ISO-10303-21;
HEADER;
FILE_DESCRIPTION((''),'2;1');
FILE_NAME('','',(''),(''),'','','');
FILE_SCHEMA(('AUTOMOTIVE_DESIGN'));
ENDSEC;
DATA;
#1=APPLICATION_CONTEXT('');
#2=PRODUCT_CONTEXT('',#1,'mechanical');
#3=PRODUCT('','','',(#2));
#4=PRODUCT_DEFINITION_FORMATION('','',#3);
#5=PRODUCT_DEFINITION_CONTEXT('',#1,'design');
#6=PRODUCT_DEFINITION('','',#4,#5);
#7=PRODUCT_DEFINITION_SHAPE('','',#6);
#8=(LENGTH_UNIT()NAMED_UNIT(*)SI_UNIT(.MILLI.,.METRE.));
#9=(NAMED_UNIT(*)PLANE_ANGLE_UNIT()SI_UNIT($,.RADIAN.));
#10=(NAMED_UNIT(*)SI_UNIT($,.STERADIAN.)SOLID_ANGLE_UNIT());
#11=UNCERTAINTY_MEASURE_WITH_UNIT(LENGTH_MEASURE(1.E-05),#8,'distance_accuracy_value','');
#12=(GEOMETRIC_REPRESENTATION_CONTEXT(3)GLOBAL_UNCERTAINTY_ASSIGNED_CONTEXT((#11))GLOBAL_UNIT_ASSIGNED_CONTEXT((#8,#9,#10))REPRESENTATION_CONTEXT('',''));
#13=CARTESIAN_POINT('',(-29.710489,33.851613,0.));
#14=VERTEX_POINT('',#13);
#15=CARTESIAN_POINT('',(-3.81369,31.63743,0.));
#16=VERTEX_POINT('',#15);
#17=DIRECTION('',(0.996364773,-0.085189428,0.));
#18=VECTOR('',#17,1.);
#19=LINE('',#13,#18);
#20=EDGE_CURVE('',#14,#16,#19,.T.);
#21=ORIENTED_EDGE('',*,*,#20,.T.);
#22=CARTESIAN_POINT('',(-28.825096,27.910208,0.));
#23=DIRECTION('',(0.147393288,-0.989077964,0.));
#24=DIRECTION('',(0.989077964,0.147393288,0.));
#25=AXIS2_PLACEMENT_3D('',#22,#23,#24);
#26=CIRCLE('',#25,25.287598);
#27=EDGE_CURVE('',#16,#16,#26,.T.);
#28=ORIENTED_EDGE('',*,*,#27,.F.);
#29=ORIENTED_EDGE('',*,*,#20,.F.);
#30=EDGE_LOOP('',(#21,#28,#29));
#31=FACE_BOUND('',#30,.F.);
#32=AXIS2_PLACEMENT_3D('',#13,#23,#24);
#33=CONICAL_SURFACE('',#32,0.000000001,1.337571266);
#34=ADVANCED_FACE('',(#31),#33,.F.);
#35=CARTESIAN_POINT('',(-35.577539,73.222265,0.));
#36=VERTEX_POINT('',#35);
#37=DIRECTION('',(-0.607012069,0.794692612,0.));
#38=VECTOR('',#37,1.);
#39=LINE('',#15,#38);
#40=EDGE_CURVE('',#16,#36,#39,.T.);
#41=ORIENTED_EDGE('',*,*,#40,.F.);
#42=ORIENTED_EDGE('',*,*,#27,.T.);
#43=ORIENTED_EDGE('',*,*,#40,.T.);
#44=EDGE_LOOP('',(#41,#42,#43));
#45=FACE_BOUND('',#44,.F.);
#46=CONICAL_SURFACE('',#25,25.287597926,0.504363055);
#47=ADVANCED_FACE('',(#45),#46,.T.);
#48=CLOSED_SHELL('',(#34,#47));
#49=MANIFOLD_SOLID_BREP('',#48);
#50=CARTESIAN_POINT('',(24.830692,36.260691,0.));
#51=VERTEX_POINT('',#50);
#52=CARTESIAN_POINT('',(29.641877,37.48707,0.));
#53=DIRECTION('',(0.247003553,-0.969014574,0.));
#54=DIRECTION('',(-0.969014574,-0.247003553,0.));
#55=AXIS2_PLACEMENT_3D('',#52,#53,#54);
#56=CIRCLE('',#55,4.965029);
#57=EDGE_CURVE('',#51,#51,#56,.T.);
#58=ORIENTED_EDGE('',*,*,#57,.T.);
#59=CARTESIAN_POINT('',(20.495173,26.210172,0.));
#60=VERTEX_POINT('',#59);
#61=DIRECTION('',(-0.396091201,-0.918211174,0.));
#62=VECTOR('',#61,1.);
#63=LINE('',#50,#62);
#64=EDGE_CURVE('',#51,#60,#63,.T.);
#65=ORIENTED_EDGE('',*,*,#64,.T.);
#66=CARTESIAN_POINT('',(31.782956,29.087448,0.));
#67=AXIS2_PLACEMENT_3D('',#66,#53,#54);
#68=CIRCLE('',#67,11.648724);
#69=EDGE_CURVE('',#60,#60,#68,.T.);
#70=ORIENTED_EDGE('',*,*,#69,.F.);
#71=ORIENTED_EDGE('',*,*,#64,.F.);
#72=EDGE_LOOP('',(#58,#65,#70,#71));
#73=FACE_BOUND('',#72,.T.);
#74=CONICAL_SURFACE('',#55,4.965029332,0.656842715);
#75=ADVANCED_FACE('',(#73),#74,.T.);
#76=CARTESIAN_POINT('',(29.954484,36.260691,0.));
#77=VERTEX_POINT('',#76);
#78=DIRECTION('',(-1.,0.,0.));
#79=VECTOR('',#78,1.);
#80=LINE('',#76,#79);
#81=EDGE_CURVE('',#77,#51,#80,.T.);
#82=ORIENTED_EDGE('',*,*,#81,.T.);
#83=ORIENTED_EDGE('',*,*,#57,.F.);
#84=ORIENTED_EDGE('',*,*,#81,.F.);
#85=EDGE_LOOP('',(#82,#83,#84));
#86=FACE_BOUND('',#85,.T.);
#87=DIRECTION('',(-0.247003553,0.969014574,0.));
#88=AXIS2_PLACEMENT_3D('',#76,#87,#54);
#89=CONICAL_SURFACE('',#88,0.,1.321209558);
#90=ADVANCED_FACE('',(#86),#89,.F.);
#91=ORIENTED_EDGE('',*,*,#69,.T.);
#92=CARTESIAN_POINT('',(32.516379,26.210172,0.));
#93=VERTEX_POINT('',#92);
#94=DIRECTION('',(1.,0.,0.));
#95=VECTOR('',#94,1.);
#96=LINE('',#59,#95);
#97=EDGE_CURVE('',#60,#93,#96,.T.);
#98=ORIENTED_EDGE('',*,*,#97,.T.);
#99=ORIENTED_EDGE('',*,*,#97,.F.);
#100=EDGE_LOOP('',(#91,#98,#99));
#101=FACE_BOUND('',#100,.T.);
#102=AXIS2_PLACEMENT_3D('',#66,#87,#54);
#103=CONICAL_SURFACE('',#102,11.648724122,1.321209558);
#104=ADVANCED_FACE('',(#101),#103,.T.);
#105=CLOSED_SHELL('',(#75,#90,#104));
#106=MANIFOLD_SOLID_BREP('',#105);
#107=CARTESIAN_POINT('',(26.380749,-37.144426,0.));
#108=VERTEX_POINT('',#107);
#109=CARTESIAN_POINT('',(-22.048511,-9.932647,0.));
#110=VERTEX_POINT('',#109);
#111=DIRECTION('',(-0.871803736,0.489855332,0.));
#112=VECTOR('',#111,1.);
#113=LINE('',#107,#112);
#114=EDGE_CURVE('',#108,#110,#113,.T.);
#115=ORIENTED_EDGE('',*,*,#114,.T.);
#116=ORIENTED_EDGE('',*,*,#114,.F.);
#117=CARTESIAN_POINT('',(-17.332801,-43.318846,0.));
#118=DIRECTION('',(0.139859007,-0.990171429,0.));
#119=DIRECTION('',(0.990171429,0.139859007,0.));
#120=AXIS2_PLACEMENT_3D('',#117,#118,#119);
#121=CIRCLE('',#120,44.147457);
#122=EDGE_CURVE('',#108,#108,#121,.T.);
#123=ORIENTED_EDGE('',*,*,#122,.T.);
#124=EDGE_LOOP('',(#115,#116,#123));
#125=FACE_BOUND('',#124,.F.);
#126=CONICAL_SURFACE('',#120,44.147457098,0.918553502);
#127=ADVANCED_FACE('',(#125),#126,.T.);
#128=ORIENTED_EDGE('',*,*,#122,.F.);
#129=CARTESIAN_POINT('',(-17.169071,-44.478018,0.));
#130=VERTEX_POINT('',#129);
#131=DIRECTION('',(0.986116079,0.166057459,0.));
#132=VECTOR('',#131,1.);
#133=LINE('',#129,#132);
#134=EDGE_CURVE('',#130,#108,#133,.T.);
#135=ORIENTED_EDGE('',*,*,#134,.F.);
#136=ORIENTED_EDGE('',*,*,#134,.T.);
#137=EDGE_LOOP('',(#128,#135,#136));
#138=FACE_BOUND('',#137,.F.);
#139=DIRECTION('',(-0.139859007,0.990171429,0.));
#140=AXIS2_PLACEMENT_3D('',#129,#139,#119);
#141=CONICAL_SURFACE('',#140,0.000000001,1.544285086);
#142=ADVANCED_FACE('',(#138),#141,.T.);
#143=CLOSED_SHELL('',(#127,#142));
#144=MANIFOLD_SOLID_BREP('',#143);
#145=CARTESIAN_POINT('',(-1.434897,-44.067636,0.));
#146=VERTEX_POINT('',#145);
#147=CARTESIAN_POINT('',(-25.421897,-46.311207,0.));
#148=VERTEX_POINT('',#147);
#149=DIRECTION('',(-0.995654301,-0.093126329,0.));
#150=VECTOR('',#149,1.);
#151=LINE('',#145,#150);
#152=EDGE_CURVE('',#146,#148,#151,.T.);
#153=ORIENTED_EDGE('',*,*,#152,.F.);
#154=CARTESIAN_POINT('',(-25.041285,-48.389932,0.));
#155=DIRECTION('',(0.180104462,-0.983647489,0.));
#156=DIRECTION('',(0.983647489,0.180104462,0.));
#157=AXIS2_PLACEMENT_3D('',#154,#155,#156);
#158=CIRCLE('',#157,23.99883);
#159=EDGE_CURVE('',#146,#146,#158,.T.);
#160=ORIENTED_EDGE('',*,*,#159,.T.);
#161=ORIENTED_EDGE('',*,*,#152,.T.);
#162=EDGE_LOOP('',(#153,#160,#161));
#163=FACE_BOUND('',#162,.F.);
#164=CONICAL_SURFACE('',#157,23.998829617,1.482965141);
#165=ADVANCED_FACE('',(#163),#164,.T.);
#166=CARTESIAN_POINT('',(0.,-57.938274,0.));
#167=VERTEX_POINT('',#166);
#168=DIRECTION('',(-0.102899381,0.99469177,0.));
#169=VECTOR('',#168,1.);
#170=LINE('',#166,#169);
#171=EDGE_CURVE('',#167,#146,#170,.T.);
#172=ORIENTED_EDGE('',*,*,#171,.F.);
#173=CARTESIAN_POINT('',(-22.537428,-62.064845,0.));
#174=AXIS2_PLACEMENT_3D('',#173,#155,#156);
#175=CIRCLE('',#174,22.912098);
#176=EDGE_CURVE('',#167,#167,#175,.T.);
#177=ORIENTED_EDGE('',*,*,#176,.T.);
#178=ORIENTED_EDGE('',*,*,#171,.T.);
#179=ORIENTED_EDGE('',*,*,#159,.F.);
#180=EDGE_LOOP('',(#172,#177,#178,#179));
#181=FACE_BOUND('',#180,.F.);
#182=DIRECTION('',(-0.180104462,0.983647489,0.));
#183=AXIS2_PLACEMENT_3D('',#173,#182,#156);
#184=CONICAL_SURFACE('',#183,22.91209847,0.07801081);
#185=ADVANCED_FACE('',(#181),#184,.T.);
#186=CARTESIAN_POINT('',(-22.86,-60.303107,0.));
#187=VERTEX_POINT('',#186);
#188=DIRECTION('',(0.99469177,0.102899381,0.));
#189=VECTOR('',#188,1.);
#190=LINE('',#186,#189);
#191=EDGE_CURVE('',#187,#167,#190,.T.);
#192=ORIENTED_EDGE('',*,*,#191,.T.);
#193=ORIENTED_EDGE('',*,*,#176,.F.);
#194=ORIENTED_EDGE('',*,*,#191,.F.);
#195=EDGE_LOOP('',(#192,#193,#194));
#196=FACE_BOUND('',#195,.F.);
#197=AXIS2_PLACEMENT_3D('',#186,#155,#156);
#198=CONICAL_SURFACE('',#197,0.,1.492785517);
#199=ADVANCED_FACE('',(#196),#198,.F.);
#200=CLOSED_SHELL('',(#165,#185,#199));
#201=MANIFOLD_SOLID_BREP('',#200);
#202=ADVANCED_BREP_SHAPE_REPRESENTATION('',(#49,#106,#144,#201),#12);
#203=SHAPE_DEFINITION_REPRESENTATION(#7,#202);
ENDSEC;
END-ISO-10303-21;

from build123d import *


# Not quite as in the source:
# - the program builds the solid bodies; features that only make, move or delete a surface that nothing else refers to are left out


with BuildPart() as f1:
    # F0 (on Top) → F1 (revolve)
    with BuildSketch(Plane.XY):
        Polygon((-3.8136900403, 31.637430191), (-35.5775393546, 73.2222646475), (-29.7104893918, 33.8516127608), align=None)
    revolve(axis=Axis((-24.3563177064, -2.0773857832, 0), (0.147393288, -0.9890779639, 0)))


with BuildPart() as f5:
    # F4 (on Top) → F5 (revolve)
    with BuildSketch(Plane.XY):
        Polygon((26.3807494193, -37.1444262564), (-22.0485106111, -9.9326465279), (-17.1690713614, -44.4780178368), align=None)
    revolve(axis=Axis((-19.6087909862, -27.2053321823, 0), (0.1398590071, -0.9901714287, 0)))


with BuildPart() as f7:
    # F6 (on Top) → F7 (revolve)
    with BuildSketch(Plane.XY):
        Polygon((-1.4348968238, -44.0676359677), (-25.4218969494, -46.3112071157), (-22.85999991, -60.303106904), (0, -57.9382739961), align=None)
    revolve(axis=Axis((-24.1409484297, -53.3071570098, 0), (0.1801044624, -0.983647489, 0)))


with BuildPart() as f9:
    # F8 (on Top) → F9 (revolve)
    with BuildSketch(Plane.XY):
        Polygon((29.9544837326, 36.2606905401), (24.8306915164, 36.2606905401), (20.49517259, 26.2101721019), (32.5163789093, 26.2101721019), align=None)
    revolve(axis=Axis((31.235431321, 31.235431321, 0), (0.247003553, -0.9690145741, 0)))


solid = Compound([f1.part, f5.part, f7.part, f9.part])
